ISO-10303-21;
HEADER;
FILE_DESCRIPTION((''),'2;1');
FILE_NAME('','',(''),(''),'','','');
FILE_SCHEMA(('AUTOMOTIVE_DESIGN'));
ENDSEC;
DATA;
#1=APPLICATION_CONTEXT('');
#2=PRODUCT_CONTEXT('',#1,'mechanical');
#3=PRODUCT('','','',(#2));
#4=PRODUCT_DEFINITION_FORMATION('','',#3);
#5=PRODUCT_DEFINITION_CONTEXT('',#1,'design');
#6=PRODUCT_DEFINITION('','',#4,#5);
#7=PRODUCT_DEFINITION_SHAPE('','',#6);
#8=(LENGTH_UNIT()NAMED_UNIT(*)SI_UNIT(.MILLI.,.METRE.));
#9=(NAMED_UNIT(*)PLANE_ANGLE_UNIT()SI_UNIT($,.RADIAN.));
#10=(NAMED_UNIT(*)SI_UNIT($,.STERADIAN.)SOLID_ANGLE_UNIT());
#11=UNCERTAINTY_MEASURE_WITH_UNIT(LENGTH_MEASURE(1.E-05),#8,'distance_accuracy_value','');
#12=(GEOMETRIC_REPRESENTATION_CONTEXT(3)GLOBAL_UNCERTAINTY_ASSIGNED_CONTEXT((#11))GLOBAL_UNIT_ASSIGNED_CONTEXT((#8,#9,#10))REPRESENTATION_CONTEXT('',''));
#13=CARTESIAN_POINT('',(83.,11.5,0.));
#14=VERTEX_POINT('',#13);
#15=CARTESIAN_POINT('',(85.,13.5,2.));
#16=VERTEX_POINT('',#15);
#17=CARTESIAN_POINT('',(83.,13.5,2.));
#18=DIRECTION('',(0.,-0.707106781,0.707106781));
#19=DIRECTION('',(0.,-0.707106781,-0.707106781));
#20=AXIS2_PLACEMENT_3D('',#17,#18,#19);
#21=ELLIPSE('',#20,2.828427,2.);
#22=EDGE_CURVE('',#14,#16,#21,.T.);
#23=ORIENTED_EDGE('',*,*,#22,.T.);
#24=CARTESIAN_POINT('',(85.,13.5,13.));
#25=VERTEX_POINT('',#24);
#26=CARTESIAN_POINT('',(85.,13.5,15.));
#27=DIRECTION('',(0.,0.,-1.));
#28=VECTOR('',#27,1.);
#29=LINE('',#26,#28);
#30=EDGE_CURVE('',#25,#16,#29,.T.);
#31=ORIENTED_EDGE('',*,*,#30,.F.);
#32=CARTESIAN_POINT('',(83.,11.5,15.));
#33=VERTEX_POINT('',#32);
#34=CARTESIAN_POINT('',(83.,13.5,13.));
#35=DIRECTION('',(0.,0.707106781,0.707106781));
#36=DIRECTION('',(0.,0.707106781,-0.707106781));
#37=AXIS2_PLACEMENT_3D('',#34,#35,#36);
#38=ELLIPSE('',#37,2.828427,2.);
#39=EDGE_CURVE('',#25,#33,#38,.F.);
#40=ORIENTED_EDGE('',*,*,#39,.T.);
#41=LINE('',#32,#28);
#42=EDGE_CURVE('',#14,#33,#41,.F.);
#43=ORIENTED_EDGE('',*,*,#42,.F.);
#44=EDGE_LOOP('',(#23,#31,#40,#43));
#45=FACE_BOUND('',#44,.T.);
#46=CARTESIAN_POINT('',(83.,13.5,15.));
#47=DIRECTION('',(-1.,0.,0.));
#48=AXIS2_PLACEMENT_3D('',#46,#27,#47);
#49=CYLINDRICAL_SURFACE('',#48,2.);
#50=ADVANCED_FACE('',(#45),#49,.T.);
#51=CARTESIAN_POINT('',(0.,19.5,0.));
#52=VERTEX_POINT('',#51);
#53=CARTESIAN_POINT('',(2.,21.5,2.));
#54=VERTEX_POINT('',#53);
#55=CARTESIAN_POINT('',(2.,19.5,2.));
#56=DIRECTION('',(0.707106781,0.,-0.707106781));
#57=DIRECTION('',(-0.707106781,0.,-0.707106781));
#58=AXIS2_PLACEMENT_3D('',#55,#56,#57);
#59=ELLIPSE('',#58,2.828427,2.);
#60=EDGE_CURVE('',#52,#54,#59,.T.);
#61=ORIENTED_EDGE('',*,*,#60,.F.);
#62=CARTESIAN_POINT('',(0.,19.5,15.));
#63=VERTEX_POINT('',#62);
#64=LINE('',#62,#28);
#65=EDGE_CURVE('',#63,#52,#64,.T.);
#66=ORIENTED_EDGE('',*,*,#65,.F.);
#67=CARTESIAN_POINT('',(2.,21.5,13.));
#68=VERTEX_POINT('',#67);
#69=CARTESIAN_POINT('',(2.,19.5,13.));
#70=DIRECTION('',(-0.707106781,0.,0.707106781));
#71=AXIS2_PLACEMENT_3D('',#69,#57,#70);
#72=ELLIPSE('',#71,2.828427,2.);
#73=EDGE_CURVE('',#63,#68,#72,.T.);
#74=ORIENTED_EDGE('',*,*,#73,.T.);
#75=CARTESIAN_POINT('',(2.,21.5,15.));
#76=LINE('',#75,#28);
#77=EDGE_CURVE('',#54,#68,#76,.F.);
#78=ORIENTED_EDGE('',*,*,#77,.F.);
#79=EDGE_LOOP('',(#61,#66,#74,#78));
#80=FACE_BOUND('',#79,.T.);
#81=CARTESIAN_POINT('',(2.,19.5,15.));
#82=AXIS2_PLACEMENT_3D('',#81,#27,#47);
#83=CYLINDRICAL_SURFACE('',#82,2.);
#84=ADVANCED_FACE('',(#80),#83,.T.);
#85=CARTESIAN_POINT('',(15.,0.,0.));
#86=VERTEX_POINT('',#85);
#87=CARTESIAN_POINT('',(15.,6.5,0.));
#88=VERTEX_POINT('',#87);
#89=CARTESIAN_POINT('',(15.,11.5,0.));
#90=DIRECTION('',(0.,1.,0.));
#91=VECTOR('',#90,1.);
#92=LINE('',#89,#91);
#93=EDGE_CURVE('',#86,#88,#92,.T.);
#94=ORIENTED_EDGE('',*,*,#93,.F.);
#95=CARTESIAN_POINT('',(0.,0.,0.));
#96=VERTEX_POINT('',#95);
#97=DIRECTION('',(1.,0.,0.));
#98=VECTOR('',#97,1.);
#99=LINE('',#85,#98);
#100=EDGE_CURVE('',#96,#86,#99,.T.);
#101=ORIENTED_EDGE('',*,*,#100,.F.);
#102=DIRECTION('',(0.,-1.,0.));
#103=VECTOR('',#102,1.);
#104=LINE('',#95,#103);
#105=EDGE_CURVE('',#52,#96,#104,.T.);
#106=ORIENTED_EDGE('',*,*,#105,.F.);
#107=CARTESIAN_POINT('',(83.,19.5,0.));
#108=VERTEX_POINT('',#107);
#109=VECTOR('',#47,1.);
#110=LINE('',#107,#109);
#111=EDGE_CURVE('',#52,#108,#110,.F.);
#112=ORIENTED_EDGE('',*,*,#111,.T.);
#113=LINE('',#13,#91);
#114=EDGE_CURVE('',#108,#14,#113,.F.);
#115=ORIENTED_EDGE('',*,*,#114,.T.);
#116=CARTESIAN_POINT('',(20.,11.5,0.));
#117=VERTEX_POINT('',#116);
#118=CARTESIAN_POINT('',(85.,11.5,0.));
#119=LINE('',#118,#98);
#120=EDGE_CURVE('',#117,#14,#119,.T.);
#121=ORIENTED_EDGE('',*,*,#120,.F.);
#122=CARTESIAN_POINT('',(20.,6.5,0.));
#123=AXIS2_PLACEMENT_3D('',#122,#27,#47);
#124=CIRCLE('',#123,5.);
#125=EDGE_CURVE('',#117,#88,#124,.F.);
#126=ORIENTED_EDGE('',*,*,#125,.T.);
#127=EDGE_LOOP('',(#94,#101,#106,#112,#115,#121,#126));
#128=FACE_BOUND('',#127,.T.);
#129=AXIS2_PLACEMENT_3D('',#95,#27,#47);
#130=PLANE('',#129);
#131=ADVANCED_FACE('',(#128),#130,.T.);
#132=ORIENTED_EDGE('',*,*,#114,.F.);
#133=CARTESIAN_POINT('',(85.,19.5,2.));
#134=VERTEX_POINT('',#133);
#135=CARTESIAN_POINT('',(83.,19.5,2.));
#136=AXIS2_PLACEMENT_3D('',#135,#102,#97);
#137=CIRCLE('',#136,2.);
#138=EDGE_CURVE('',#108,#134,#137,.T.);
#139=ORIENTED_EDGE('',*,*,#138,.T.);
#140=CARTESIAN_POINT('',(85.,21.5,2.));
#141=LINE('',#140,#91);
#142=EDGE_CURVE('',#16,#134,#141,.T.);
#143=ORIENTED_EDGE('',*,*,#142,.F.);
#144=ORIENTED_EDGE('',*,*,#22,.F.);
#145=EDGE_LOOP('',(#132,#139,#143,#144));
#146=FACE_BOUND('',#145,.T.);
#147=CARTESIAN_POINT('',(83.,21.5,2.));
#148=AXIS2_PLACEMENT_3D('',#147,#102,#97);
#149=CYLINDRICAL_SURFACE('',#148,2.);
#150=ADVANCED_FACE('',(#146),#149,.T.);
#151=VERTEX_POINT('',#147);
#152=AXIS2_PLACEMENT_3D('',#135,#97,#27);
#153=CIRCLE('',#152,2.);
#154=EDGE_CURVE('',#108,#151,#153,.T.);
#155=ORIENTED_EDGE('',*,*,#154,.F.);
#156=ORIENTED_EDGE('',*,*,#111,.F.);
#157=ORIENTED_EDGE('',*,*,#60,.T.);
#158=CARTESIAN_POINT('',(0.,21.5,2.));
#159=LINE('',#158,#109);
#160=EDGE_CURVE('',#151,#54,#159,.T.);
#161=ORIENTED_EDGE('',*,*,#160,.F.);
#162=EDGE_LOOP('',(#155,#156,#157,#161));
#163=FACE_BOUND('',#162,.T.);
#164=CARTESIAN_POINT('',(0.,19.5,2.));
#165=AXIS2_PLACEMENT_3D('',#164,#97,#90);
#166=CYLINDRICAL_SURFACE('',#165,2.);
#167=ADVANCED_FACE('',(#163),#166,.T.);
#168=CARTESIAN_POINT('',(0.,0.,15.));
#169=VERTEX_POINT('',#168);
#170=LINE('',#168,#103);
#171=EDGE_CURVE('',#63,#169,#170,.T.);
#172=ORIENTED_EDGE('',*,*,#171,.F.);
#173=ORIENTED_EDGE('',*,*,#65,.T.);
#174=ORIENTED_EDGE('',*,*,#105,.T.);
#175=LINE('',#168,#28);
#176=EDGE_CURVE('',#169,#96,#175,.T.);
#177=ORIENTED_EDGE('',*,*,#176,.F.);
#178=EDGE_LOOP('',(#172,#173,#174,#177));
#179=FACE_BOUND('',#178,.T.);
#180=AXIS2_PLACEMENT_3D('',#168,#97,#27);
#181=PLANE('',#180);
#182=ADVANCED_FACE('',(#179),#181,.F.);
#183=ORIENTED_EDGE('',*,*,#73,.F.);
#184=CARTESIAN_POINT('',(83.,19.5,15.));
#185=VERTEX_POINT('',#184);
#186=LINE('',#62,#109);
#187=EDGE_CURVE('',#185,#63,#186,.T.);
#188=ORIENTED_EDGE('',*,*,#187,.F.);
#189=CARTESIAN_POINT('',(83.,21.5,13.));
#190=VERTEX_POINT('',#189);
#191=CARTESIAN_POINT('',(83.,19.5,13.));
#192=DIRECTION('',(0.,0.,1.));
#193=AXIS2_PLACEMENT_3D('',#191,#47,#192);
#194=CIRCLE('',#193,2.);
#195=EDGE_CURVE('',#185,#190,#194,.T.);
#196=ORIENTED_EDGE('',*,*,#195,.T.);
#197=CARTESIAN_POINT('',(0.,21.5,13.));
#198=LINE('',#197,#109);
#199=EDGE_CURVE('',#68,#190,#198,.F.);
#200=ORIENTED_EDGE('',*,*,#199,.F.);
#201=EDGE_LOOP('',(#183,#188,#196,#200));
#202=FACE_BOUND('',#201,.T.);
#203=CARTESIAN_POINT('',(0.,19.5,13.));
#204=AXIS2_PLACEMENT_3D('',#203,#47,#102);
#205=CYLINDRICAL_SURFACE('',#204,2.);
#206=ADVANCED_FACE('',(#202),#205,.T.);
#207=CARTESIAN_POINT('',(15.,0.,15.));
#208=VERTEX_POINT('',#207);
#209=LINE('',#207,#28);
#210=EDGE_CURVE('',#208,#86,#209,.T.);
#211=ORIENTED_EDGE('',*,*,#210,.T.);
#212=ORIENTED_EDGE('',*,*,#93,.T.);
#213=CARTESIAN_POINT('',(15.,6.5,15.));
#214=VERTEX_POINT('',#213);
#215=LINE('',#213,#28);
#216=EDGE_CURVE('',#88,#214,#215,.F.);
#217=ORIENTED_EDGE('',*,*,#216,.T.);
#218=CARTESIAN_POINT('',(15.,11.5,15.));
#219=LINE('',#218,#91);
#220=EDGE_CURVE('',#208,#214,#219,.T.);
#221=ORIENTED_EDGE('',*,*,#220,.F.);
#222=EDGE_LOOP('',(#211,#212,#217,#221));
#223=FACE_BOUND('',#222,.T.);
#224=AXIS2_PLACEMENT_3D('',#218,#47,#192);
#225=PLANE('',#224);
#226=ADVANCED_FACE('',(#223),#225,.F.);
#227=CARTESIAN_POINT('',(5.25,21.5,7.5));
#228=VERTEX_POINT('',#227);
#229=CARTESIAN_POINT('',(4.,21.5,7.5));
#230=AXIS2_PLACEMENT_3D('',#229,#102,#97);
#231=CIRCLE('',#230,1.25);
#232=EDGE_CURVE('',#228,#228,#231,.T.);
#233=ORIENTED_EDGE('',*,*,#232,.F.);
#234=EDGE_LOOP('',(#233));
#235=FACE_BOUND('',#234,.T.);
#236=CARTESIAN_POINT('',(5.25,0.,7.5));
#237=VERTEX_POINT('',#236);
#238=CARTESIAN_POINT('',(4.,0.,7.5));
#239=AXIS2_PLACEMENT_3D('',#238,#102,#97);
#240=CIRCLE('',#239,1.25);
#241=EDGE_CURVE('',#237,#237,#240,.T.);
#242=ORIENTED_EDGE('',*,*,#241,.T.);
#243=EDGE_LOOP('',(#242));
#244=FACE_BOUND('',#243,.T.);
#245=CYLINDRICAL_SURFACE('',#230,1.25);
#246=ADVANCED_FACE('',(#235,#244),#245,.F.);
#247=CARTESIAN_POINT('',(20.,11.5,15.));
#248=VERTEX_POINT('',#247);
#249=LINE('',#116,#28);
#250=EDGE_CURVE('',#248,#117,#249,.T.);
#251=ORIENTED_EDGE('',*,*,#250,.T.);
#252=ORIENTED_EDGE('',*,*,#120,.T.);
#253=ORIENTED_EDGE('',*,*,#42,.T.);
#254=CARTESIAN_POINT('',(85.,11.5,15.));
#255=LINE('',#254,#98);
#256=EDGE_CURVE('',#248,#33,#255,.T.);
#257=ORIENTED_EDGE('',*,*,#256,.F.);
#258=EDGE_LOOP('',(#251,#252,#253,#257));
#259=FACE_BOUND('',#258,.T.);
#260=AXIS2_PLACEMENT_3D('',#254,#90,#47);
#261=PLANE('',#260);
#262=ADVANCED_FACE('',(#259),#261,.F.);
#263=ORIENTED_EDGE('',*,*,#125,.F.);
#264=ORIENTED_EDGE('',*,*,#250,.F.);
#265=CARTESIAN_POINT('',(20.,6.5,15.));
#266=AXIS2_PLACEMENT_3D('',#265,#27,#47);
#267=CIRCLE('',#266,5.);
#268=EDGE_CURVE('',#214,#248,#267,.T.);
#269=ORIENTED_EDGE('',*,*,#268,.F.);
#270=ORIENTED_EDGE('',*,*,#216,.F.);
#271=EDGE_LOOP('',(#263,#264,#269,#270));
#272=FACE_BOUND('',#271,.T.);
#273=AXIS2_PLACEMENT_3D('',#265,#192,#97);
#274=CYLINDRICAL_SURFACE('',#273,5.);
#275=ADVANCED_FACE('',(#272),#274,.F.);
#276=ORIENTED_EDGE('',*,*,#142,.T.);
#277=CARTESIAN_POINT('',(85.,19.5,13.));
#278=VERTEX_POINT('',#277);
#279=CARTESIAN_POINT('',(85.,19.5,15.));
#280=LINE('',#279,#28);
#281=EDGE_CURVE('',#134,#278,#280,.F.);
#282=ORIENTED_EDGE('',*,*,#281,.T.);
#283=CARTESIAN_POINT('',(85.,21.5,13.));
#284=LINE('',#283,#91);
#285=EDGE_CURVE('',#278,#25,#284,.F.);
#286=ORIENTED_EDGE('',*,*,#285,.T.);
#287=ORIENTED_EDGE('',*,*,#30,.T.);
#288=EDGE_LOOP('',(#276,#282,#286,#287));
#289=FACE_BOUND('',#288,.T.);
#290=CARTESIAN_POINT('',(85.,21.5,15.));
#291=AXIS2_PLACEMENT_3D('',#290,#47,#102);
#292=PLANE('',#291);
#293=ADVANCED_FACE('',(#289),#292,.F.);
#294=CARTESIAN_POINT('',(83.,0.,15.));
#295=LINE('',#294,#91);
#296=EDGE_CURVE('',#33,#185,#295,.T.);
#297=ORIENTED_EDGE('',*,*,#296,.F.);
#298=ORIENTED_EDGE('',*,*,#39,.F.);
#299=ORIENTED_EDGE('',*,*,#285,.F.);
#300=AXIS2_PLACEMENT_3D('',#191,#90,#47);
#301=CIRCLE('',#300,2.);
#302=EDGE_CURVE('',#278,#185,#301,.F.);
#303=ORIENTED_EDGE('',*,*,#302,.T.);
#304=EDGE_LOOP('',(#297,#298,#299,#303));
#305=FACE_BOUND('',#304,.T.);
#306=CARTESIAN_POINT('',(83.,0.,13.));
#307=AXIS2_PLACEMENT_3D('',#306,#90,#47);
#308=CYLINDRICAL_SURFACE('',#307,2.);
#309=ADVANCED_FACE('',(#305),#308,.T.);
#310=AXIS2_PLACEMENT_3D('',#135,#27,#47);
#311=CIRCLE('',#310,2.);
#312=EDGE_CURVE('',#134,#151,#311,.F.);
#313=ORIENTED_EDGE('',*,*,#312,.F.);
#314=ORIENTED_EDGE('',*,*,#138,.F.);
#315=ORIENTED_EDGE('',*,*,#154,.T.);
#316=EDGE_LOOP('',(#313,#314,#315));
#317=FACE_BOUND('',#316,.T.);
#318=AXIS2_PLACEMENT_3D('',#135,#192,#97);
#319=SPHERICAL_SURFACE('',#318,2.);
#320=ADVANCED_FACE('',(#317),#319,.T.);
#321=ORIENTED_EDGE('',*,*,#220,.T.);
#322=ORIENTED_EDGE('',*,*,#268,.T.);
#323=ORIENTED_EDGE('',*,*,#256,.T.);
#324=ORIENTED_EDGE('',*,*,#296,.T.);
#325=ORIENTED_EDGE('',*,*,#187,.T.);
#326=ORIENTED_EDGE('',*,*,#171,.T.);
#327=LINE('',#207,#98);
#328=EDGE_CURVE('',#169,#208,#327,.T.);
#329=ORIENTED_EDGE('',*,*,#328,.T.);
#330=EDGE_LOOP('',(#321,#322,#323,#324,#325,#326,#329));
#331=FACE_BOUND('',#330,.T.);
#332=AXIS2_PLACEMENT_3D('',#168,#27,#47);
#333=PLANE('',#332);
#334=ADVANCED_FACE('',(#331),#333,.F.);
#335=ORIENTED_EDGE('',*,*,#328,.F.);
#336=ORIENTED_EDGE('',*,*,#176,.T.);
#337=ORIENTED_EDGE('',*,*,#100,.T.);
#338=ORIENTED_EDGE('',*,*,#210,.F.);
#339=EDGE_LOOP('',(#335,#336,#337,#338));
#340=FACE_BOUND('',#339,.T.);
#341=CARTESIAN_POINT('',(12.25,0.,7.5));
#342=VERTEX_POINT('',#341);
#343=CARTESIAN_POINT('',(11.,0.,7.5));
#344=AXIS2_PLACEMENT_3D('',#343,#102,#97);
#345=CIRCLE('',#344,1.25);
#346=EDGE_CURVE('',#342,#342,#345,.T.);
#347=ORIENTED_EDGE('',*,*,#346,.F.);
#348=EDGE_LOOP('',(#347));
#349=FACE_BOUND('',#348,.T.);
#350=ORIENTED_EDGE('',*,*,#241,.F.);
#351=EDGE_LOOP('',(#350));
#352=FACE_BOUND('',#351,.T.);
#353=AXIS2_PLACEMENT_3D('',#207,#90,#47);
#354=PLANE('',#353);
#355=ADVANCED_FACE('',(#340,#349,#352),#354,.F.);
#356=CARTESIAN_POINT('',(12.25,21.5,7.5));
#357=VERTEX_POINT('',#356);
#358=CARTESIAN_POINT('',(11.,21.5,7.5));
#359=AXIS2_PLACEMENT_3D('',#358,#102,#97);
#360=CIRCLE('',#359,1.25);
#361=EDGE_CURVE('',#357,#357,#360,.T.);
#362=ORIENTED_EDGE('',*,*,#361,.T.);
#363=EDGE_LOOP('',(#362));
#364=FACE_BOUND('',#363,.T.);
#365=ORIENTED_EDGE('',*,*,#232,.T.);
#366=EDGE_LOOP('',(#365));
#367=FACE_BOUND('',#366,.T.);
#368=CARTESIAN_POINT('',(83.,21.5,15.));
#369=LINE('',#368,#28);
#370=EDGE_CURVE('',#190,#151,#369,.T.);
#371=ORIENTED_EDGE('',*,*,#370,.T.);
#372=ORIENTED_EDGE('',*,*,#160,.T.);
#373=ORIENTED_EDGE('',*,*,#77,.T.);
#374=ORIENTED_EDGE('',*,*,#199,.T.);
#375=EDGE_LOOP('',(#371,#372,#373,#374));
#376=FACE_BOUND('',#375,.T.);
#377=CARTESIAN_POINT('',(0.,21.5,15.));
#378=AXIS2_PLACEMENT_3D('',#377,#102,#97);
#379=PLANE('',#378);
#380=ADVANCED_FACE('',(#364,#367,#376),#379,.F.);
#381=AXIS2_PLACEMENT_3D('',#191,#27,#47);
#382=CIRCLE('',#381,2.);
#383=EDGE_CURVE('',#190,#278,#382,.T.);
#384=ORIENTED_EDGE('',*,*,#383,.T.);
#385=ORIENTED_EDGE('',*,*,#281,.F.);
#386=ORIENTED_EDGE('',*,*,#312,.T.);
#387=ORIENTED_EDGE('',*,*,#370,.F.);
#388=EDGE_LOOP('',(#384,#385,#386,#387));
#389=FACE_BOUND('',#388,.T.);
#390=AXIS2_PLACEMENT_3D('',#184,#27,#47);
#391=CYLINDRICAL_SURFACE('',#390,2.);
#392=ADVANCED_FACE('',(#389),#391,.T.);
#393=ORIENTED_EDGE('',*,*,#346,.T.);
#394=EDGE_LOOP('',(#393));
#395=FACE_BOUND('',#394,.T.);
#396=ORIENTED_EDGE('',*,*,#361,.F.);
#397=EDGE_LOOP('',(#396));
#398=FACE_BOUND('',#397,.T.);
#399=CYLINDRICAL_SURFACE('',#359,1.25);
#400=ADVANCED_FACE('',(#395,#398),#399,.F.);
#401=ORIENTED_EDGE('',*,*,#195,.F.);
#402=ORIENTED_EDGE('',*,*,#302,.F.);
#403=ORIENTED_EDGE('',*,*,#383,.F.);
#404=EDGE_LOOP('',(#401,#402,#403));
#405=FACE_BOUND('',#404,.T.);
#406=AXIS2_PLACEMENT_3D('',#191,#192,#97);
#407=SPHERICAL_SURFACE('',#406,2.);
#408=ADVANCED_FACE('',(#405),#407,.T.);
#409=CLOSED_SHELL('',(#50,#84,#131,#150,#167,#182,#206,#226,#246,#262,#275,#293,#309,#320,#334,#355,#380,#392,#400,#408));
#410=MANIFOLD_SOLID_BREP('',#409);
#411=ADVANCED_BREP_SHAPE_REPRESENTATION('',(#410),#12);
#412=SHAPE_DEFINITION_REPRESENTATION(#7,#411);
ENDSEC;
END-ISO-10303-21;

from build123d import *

# Parameters (mm, degrees)
BOSS_EXTRUDE1_DEPTH = 15
SKETCH2_R           = 1.25
CUT_EXTRUDE1_DEPTH  = 89.950829114
FILLET1_R           = 5
FILLET2_R           = 2
FILLET3_R           = 2


with BuildPart() as part:
    # Sketch1 → Boss-Extrude1 (new body)
    with BuildSketch(Plane.XY):
        Polygon((0, 0), (0, 21.5), (85, 21.5), (85, 11.5), (15, 11.5), (15, 0), align=None)
    extrude(amount=BOSS_EXTRUDE1_DEPTH)

    # Sketch2 → Cut-Extrude1 (cut, through all)
    with BuildSketch(Plane.XZ):
        with Locations((4, 7.5)):
            Circle(SKETCH2_R)
        with Locations((11, 7.5)):
            Circle(SKETCH2_R)
    extrude(amount=-CUT_EXTRUDE1_DEPTH, mode=Mode.SUBTRACT)

    # Fillet1
    fillet1_edges = [part.edges().sort_by_distance(p)[0] for p in [
        (15, 11.5, 7.5),
    ]]
    fillet(fillet1_edges, radius=FILLET1_R)

    # Fillet2
    fillet2_edges = [part.edges().sort_by_distance(p)[0] for p in [
        (85, 21.5, 7.5),
        (85, 11.5, 7.5),
        (85, 16.5, 15),
        (85, 16.5, 0),
    ]]
    fillet(fillet2_edges, radius=FILLET2_R)

    # Fillet3
    # the kernel refuses this fillet: 2 mm, written as the material it takes off along each edge
    with BuildSketch(Plane(origin=(83, 19.5, 13), x_dir=(0, 0, 1), z_dir=(0, 1, 0))) as fillet3_piece_1_section:
        Polygon((0, 0), (FILLET3_R, 0), (FILLET3_R, FILLET3_R), (0, FILLET3_R), align=None)
    fillet3_piece_1 = extrude(amount=FILLET3_R, mode=Mode.PRIVATE)
    fillet3_piece_1 = fillet3_piece_1 - Plane(origin=(83, 19.5, 13), x_dir=(-0.7071067811865475, 2.0097183471152325e-15, -0.7071067811865475), z_dir=(0, 1, 0)) * Sphere(FILLET3_R, mode=Mode.PRIVATE)
    add(fillet3_piece_1, mode=Mode.SUBTRACT)
    with BuildSketch(Plane(origin=(83, 19.5, 2), x_dir=(0, 1, 0), z_dir=(0, 0, -1))) as fillet3_piece_2_section:
        Polygon((0, 0), (FILLET3_R, 0), (FILLET3_R, FILLET3_R), (0, FILLET3_R), align=None)
    fillet3_piece_2 = extrude(amount=FILLET3_R, mode=Mode.PRIVATE)
    fillet3_piece_2 = fillet3_piece_2 - Plane(origin=(83, 19.5, 2), x_dir=(-0.7071067811865486, -0.7071067811865466, 0), z_dir=(0, 0, -1)) * Sphere(FILLET3_R, mode=Mode.PRIVATE)
    add(fillet3_piece_2, mode=Mode.SUBTRACT)
    with BuildSketch(Plane(origin=(0, 21.5, -5), x_dir=(1, 0, 0), z_dir=(0, 0, 1))) as fillet3_piece_3:
        with BuildLine():
            CenterArc((FILLET3_R, -FILLET3_R), FILLET3_R, 90, 90)
            Line((0, -FILLET3_R), (0, 0))
            Line((0, 0), (FILLET3_R, 0))
        make_face()
    extrude(amount=25, mode=Mode.SUBTRACT)
    with BuildSketch(Plane(origin=(-5, 21.5, 0), x_dir=(0, -1, 0), z_dir=(1, 0, 0)), Plane(origin=(-5, 21.5, 15), x_dir=(0, 0, -1), z_dir=(1, 0, 0))) as fillet3_piece_4:
        with BuildLine():
            CenterArc((FILLET3_R, -FILLET3_R), FILLET3_R, 90, 90)
            Line((0, -FILLET3_R), (0, 0))
            Line((0, 0), (FILLET3_R, 0))
        make_face()
    extrude(amount=88, mode=Mode.SUBTRACT)


solid = part.part
